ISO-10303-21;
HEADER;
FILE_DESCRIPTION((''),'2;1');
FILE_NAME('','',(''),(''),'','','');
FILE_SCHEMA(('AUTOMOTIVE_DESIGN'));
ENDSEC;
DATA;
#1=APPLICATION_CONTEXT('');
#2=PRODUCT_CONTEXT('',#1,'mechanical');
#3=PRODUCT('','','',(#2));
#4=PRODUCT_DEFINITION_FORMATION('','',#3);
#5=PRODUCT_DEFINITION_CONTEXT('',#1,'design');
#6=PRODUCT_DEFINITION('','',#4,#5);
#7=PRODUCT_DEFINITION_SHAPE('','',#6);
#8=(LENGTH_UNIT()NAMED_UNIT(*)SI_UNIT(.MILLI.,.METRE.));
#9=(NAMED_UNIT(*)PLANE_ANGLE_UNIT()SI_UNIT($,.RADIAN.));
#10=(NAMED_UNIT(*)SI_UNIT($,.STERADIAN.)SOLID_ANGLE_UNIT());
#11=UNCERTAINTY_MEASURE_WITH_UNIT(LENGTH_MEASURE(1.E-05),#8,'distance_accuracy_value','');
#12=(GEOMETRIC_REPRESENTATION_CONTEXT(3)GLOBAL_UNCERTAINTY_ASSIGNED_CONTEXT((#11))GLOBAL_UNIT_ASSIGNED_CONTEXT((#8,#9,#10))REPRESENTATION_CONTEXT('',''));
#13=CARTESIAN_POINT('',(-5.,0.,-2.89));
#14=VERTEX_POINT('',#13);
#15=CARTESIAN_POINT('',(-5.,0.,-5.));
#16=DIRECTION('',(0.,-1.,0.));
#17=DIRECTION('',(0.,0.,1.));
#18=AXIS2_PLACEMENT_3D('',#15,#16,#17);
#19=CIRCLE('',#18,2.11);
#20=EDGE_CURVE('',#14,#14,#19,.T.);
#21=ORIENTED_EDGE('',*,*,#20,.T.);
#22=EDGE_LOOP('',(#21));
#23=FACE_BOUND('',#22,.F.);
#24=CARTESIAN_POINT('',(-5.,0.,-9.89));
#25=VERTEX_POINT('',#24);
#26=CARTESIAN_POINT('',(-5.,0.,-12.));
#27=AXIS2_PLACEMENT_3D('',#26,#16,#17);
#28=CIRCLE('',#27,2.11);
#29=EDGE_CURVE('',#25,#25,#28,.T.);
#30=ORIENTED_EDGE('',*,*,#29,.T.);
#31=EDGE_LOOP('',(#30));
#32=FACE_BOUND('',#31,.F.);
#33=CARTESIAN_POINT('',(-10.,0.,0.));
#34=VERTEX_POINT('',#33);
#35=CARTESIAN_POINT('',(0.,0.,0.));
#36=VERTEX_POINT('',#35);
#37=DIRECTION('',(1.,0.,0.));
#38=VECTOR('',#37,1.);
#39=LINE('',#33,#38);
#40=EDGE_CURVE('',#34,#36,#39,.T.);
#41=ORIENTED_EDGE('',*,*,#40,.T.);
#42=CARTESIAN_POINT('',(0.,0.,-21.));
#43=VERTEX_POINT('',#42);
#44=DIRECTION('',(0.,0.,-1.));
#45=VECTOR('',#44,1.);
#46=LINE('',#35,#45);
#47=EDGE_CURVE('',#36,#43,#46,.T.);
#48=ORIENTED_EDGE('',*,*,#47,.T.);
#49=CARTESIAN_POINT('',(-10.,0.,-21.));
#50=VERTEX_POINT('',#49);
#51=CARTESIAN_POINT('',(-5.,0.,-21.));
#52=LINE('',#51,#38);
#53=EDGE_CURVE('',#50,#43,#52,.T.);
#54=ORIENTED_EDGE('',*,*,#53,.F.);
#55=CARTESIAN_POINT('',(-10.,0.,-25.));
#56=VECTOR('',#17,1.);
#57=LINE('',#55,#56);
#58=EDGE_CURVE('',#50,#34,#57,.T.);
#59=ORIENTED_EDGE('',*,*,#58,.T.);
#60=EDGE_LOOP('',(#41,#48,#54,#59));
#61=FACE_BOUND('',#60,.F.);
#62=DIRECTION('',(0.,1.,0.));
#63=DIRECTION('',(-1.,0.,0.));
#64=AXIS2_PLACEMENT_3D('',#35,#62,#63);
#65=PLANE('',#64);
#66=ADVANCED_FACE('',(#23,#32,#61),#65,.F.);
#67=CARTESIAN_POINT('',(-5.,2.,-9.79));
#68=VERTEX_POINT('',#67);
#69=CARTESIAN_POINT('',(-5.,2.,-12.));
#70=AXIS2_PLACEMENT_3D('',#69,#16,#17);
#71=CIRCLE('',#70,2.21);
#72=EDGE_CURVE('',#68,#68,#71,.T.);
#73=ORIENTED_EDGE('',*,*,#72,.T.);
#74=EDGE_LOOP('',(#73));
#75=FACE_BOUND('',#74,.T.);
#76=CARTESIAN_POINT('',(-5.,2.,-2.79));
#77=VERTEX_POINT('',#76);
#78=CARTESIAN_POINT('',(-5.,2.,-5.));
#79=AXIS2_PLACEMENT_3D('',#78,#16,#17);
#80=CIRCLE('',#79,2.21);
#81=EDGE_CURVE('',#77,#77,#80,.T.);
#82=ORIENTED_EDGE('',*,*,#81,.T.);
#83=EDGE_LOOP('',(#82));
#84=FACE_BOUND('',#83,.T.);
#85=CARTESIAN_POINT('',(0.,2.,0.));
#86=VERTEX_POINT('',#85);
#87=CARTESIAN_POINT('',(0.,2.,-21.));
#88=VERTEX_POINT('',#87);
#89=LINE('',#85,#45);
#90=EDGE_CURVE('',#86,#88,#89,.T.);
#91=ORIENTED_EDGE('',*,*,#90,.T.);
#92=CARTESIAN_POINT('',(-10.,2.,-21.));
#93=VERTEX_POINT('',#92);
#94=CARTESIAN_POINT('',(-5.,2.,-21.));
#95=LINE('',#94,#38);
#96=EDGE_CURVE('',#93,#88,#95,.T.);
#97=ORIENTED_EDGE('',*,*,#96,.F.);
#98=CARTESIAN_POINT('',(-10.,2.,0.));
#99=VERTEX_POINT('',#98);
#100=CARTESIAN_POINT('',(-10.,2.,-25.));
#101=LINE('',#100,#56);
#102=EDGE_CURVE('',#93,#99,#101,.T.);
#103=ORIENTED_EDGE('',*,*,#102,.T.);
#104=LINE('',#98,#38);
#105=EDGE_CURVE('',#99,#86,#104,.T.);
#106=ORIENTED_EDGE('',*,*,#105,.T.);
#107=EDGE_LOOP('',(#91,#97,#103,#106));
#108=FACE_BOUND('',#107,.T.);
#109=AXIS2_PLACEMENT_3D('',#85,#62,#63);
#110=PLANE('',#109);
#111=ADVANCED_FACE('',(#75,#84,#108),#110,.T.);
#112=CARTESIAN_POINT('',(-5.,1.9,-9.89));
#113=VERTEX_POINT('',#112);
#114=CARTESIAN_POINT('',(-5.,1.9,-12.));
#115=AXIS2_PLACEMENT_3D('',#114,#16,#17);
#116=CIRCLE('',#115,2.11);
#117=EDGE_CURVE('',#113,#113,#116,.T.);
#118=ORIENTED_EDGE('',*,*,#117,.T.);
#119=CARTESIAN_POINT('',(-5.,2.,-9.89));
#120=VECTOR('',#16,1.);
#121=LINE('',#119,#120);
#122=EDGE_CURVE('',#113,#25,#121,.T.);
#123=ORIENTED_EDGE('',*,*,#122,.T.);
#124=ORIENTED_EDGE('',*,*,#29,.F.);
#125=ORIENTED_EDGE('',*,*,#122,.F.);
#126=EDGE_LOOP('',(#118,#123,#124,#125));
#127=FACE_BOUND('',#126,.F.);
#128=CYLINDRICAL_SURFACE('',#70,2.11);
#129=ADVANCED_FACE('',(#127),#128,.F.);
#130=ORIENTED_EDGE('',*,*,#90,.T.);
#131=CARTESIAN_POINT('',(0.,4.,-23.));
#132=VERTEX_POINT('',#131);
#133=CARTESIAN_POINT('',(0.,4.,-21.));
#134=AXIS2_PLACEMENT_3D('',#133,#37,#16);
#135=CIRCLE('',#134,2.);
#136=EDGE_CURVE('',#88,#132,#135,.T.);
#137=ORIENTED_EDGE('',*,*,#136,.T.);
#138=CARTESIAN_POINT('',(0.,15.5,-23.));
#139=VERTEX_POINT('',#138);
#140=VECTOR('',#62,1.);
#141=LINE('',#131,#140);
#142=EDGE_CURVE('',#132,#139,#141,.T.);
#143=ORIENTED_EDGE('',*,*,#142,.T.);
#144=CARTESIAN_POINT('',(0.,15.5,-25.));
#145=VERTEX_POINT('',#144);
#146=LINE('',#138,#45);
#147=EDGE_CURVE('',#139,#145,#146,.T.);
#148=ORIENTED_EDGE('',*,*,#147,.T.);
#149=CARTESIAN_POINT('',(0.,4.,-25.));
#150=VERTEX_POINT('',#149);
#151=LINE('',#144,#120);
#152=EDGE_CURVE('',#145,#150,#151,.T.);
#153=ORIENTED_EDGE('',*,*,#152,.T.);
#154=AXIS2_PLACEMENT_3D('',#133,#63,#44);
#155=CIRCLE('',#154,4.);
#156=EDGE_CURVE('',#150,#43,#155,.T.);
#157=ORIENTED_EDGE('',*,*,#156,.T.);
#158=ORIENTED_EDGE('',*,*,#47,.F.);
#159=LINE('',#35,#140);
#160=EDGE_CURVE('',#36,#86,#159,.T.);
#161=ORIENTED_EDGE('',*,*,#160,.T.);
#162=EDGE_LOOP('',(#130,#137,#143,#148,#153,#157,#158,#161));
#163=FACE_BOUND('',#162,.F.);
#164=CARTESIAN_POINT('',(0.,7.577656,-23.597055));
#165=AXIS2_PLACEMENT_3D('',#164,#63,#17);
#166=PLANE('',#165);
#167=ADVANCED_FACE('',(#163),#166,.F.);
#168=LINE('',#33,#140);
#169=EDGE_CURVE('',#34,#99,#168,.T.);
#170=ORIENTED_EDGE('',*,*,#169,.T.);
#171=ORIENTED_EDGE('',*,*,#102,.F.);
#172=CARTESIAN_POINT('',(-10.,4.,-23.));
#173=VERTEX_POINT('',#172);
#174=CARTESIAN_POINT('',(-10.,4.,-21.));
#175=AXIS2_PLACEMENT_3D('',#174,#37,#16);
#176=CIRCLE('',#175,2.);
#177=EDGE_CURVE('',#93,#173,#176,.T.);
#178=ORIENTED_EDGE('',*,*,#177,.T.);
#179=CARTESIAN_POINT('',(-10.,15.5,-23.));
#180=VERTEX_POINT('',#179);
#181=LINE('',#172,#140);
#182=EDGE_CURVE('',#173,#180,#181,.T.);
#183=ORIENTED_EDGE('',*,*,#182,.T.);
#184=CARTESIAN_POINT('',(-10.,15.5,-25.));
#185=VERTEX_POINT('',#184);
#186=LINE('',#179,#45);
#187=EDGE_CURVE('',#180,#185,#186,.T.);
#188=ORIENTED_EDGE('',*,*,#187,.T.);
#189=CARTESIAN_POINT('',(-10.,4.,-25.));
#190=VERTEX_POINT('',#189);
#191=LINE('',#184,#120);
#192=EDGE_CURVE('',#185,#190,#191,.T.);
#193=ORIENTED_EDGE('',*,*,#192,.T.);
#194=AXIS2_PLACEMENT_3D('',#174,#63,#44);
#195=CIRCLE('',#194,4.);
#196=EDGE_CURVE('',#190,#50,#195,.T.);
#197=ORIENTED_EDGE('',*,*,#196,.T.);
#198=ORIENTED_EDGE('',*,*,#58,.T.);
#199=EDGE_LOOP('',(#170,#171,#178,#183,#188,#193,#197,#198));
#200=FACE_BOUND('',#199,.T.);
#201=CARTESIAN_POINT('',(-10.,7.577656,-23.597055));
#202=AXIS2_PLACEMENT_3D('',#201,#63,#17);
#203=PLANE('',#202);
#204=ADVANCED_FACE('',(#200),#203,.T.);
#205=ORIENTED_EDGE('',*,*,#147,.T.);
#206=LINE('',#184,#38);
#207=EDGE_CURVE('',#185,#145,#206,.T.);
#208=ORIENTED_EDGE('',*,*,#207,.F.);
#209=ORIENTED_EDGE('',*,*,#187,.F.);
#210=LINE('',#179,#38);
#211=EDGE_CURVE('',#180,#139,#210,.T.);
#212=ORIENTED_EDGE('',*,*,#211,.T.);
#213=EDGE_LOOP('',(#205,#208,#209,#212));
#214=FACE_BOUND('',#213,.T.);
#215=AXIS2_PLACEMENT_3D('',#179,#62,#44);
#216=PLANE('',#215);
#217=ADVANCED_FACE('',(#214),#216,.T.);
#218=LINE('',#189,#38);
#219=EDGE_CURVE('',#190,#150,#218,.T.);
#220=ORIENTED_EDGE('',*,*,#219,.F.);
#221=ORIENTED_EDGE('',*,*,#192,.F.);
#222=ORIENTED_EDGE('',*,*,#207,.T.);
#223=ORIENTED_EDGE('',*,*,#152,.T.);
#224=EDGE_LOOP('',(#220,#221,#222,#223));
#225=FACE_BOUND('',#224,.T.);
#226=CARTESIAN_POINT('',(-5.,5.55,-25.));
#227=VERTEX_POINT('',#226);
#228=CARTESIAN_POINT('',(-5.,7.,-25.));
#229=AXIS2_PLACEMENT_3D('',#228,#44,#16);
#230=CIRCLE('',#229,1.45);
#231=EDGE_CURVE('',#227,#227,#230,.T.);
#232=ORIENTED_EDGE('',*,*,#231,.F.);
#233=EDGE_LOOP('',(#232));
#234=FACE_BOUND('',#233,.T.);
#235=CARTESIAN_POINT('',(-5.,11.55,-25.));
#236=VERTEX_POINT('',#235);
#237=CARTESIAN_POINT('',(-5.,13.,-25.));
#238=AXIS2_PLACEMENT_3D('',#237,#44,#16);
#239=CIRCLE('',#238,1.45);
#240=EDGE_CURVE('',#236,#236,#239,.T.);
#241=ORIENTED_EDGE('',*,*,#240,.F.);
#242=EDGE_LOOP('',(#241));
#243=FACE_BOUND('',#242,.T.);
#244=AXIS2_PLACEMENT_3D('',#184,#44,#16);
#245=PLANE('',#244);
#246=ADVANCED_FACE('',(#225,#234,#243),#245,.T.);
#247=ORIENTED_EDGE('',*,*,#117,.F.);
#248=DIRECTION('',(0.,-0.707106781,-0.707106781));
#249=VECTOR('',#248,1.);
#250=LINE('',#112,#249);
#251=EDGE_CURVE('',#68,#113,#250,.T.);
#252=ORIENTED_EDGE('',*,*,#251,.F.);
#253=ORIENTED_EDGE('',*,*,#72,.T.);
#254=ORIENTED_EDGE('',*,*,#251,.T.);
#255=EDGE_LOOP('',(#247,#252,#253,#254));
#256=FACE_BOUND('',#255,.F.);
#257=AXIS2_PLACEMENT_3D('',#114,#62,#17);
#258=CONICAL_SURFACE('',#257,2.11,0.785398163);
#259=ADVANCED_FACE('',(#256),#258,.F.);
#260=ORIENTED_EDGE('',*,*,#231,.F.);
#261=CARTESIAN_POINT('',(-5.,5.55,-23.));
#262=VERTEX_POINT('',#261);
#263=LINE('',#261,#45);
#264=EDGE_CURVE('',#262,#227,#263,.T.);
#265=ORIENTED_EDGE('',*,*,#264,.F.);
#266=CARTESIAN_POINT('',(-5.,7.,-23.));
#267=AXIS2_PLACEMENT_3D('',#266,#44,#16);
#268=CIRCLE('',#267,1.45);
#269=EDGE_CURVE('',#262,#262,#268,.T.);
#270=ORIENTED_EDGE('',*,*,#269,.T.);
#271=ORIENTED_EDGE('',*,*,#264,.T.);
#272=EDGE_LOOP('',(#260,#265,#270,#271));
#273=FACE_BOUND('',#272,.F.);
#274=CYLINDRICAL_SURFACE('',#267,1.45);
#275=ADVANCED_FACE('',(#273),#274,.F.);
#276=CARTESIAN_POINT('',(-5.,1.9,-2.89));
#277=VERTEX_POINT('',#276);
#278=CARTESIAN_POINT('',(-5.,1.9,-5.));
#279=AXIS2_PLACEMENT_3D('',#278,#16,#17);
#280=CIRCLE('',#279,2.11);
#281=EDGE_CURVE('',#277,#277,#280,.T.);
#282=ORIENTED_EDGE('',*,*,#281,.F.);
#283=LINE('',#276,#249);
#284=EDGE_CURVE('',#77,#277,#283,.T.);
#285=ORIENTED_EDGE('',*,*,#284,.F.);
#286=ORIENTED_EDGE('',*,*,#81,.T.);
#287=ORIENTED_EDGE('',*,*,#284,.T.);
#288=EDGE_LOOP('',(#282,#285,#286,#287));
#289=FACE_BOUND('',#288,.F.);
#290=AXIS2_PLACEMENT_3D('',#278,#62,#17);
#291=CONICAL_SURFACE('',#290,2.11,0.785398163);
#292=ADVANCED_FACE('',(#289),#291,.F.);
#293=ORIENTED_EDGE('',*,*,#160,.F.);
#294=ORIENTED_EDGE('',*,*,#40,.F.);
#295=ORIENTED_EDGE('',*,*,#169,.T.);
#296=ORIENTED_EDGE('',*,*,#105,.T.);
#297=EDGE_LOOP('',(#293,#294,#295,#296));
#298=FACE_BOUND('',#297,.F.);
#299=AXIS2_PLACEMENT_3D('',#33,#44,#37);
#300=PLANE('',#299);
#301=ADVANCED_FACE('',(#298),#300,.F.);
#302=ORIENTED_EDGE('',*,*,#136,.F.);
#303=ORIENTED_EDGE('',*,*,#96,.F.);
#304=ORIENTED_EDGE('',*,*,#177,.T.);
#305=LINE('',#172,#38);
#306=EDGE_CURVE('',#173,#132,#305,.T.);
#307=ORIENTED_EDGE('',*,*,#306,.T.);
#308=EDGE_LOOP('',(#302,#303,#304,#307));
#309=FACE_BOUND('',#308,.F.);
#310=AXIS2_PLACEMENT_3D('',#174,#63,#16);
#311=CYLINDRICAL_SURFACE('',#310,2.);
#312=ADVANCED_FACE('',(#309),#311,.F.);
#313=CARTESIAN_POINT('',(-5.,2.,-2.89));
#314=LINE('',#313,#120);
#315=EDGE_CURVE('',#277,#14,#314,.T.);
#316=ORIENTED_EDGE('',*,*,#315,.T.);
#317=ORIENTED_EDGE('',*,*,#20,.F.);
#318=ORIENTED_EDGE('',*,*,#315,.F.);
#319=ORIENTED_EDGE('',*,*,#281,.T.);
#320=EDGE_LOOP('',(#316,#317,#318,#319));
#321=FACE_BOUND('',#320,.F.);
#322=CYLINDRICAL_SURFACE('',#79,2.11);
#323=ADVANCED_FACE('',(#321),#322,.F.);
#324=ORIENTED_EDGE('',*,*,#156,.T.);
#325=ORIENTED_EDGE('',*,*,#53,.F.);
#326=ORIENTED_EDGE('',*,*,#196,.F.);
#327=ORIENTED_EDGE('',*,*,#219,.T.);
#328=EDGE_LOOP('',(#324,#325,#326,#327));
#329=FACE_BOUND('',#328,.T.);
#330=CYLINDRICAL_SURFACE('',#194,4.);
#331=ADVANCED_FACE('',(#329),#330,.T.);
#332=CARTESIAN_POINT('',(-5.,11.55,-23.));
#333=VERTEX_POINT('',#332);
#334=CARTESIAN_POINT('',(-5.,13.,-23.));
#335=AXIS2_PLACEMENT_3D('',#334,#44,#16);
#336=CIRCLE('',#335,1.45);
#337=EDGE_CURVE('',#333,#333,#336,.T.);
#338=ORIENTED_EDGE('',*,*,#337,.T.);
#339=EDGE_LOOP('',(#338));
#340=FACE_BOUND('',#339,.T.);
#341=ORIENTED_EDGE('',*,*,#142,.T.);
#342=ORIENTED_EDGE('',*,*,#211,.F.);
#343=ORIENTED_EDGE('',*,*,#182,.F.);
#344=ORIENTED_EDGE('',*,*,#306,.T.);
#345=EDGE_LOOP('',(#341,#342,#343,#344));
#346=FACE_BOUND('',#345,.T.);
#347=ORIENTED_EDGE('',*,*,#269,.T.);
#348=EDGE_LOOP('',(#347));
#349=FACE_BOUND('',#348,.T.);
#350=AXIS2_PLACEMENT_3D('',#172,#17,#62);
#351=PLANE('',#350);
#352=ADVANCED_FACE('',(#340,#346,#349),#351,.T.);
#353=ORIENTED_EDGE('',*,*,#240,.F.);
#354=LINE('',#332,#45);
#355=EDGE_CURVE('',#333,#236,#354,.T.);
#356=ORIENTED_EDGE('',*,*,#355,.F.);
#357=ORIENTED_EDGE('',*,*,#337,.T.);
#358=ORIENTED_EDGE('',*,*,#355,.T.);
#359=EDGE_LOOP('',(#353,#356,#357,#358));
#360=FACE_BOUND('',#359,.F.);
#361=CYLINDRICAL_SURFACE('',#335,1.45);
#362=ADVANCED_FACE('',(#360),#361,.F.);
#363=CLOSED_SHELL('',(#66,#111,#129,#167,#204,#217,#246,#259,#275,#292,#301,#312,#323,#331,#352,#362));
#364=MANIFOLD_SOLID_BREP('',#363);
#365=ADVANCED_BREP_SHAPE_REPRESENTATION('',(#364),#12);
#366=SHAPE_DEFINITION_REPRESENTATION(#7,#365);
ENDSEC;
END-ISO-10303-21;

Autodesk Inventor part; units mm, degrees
ref_plane "YZ Plane" through (0, 0, 0) normal (1, 0, 0) x (0, 1, 0)
ref_plane "XZ Plane" through (0, 0, 0) normal (0, 1, 0) x (-1, 0, 0)
ref_plane "XY Plane" through (0, 0, 0) normal (0, 0, 1) x (1, 0, 0)
sketch "Szkic1" plane through (0, 0, 0) normal (0, 1, 0) x (-1, 0, 0)
  line L0 (10, 0) -> (0, 0)
  line L1 (0, 0) -> (0, -25)
  line L2 (0, -25) -> (10, -25)
  line L3 (10, -25) -> (10, 0)
  dimension "d0" = 25
  dimension "d1" = 10
  dimension "d13" = 0
  dimension "d14" = 0
extrude "Płyta1" add sketch "Szkic1" along normal blind 2
sketch "Szkic2" plane through (-10, 0, -23) normal (0, 0, -1) x (-1, 0, 0)
  line L0 (-10, 0) -> (0, 0)
  line L1 (0, 0) -> (0, 15.5)
  line L2 (0, 15.5) -> (-10, 15.5)
  line L3 (-10, 15.5) -> (-10, 0)
edge flange "Kołnierz1" height 15.5 angle 90 thickness 2 bend radius 2 thickness toward (0, 0, -1) relief tear relief width 2 relief depth 1 edges at (-5, 2, -25) wall of the first edge with corners at (0, 0, -23) (-10, 0, -23) (-10, 15.5, -23) (0, 15.5, -23)
bend "Zagięcie1"
corner "Narożnik1"
sketch "Szkic4" plane through (0, 2, 0) normal (0, 1, 0) x (1, 0, 0)
  line L0 (-10, 0) -> (-10, 21) projected
  line L1 (0, 0) -> (-10, 0) projected
  point P0 (-5, 5)
  point P1 (-5, 12)
  dimension "d48" = 5
  dimension "d49" = 7
sketch "Szkic5" plane through (-10, 15.5, -23) normal (0, 0, 1) x (1, 0, 0)
  line L0 (10, 0) -> (0, 0) projected
  line L1 (0, 0) -> (0, -11.5) projected
  point P0 (10, -15.5)
  point P1 (5, -8.5)
  point P2 (5, -2.5)
  dimension "d50" = 6
  dimension "d51" = 2.5
hole "Otwór1" at (-5, 7, -23) at (-5, 13, -23) direction (0, 0, -1) diameter 2.9 end through all clearance for "Wkręt z łbem walcowym gniazdowym ISO 4762" size "M2.5" standard "ISO"
hole "Otwór2" at (-5, 2, -5) at (-5, 2, -12) direction (0, -1, 0) diameter 4.22 end through all
chamfer "Faza1" distance 0.1 angle 45 2 edges at (-5, 2, -7.11) (-5, 2, -14.11)
equation "\"d36\" = Grubość"
equation "\"d43\" = Grubość"
equation "\"d2\" = Grubość"
equation "\"d3\" = SzerokośćGięciaPodcięcia"
equation "\"d4\" = GłębokośćGięciaPodcięcia"
equation "\"d5\" = MinimalnaPozostałość"
equation "\"d6\" = PromieńPrzejścia"
equation "\"d9\" = PromieńGięcia"
equation "\"d10\" = RozmiarPodcięciaNarożnika"
equation "\"d11\" = Wielk_odstępu"
equation "\"d12\" = Rozmiar_promienia_Jacobiego"
equation "\"PromieńGięcia\" = Grubość"
equation "\"SzerokośćGięciaPodcięcia\" = Grubość"
equation "\"GłębokośćGięciaPodcięcia\" = 0.5 * Grubość"
equation "\"RozmiarPodcięciaNarożnika\" = 4 * Grubość"
equation "\"MinimalnaPozostałość\" = 2 * Grubość"
equation "\"PromieńPrzejścia\" = PromieńGięcia"
equation "\"Rozmiar_promienia_Jacobiego\" = PromieńGięcia"
equation "\"Wielk_odstępu\" = Grubość"
equation "\"Grubość\" = 2"
properties material "Aluminium 6061"
